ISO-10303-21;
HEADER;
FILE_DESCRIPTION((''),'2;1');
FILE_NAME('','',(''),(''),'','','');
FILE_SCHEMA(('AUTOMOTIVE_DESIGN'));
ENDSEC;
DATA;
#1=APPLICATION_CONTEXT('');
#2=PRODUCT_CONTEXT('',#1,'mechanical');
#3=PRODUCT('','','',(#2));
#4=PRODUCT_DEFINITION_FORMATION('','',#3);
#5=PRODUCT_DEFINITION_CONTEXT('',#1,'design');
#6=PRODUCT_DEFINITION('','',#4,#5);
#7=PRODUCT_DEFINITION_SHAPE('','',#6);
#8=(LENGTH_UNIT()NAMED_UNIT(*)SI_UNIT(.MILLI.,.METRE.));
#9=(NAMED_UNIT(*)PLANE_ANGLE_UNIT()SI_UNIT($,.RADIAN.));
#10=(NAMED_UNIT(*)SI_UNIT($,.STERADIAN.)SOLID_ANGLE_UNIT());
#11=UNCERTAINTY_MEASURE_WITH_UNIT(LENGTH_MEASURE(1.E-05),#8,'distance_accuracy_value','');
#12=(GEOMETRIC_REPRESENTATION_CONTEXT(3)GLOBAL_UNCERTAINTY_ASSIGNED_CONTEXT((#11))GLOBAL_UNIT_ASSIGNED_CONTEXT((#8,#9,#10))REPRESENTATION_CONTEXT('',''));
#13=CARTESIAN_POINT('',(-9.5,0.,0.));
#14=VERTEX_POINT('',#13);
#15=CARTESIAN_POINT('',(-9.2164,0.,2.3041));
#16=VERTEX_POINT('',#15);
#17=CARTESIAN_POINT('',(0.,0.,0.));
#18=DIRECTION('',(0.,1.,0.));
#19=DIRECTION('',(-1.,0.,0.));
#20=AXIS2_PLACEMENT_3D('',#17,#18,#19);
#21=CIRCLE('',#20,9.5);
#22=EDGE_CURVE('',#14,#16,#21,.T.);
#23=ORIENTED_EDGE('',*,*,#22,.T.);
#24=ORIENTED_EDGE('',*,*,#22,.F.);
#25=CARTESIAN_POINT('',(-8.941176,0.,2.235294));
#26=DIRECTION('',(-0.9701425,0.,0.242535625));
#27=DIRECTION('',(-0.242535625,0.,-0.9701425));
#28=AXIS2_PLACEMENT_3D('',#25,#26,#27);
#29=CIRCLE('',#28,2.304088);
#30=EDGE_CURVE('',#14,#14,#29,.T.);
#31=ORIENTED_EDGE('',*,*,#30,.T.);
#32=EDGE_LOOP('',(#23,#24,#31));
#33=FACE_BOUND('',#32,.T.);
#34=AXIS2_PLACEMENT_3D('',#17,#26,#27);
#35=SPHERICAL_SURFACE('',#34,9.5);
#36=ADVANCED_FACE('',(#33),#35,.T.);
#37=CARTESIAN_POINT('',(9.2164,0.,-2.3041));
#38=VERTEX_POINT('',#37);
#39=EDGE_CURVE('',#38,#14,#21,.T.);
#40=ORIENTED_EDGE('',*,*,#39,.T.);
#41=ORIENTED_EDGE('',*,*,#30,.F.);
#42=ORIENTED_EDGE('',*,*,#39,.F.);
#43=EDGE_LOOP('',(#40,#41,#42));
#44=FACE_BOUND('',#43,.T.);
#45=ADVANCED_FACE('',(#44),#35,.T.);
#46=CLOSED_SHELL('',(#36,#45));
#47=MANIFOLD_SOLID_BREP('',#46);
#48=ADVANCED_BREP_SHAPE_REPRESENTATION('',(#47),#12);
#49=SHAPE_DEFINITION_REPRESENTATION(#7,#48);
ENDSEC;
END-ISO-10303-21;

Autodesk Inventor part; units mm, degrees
ref_plane "YZ Plane" through (0, 0, 0) normal (1, 0, 0) x (0, 1, 0)
ref_plane "XZ Plane" through (0, 0, 0) normal (0, 1, 0) x (-1, 0, 0)
ref_plane "XY Plane" through (0, 0, 0) normal (0, 0, 1) x (1, 0, 0)
sketch "Skizze1" plane through (0, 0, 0) normal (0, 1, 0) x (-1, 0, 0)
  circle A0 centre (0, 0) radius 9.5
  line L0 (-9.2164, -2.3041) -> (9.2164, 2.3041)
  dimension "d0" = 19
revolve "Umdrehung1" add sketch "Skizze1" angle 360 about axis through (9.2164, 0, -2.3041) along (-0.9701425, 0, 0.2425356) picked at (3.5648, -3.0616) contours A0 L0
properties part number "52629-White" material "ABS-Kunststoff"
